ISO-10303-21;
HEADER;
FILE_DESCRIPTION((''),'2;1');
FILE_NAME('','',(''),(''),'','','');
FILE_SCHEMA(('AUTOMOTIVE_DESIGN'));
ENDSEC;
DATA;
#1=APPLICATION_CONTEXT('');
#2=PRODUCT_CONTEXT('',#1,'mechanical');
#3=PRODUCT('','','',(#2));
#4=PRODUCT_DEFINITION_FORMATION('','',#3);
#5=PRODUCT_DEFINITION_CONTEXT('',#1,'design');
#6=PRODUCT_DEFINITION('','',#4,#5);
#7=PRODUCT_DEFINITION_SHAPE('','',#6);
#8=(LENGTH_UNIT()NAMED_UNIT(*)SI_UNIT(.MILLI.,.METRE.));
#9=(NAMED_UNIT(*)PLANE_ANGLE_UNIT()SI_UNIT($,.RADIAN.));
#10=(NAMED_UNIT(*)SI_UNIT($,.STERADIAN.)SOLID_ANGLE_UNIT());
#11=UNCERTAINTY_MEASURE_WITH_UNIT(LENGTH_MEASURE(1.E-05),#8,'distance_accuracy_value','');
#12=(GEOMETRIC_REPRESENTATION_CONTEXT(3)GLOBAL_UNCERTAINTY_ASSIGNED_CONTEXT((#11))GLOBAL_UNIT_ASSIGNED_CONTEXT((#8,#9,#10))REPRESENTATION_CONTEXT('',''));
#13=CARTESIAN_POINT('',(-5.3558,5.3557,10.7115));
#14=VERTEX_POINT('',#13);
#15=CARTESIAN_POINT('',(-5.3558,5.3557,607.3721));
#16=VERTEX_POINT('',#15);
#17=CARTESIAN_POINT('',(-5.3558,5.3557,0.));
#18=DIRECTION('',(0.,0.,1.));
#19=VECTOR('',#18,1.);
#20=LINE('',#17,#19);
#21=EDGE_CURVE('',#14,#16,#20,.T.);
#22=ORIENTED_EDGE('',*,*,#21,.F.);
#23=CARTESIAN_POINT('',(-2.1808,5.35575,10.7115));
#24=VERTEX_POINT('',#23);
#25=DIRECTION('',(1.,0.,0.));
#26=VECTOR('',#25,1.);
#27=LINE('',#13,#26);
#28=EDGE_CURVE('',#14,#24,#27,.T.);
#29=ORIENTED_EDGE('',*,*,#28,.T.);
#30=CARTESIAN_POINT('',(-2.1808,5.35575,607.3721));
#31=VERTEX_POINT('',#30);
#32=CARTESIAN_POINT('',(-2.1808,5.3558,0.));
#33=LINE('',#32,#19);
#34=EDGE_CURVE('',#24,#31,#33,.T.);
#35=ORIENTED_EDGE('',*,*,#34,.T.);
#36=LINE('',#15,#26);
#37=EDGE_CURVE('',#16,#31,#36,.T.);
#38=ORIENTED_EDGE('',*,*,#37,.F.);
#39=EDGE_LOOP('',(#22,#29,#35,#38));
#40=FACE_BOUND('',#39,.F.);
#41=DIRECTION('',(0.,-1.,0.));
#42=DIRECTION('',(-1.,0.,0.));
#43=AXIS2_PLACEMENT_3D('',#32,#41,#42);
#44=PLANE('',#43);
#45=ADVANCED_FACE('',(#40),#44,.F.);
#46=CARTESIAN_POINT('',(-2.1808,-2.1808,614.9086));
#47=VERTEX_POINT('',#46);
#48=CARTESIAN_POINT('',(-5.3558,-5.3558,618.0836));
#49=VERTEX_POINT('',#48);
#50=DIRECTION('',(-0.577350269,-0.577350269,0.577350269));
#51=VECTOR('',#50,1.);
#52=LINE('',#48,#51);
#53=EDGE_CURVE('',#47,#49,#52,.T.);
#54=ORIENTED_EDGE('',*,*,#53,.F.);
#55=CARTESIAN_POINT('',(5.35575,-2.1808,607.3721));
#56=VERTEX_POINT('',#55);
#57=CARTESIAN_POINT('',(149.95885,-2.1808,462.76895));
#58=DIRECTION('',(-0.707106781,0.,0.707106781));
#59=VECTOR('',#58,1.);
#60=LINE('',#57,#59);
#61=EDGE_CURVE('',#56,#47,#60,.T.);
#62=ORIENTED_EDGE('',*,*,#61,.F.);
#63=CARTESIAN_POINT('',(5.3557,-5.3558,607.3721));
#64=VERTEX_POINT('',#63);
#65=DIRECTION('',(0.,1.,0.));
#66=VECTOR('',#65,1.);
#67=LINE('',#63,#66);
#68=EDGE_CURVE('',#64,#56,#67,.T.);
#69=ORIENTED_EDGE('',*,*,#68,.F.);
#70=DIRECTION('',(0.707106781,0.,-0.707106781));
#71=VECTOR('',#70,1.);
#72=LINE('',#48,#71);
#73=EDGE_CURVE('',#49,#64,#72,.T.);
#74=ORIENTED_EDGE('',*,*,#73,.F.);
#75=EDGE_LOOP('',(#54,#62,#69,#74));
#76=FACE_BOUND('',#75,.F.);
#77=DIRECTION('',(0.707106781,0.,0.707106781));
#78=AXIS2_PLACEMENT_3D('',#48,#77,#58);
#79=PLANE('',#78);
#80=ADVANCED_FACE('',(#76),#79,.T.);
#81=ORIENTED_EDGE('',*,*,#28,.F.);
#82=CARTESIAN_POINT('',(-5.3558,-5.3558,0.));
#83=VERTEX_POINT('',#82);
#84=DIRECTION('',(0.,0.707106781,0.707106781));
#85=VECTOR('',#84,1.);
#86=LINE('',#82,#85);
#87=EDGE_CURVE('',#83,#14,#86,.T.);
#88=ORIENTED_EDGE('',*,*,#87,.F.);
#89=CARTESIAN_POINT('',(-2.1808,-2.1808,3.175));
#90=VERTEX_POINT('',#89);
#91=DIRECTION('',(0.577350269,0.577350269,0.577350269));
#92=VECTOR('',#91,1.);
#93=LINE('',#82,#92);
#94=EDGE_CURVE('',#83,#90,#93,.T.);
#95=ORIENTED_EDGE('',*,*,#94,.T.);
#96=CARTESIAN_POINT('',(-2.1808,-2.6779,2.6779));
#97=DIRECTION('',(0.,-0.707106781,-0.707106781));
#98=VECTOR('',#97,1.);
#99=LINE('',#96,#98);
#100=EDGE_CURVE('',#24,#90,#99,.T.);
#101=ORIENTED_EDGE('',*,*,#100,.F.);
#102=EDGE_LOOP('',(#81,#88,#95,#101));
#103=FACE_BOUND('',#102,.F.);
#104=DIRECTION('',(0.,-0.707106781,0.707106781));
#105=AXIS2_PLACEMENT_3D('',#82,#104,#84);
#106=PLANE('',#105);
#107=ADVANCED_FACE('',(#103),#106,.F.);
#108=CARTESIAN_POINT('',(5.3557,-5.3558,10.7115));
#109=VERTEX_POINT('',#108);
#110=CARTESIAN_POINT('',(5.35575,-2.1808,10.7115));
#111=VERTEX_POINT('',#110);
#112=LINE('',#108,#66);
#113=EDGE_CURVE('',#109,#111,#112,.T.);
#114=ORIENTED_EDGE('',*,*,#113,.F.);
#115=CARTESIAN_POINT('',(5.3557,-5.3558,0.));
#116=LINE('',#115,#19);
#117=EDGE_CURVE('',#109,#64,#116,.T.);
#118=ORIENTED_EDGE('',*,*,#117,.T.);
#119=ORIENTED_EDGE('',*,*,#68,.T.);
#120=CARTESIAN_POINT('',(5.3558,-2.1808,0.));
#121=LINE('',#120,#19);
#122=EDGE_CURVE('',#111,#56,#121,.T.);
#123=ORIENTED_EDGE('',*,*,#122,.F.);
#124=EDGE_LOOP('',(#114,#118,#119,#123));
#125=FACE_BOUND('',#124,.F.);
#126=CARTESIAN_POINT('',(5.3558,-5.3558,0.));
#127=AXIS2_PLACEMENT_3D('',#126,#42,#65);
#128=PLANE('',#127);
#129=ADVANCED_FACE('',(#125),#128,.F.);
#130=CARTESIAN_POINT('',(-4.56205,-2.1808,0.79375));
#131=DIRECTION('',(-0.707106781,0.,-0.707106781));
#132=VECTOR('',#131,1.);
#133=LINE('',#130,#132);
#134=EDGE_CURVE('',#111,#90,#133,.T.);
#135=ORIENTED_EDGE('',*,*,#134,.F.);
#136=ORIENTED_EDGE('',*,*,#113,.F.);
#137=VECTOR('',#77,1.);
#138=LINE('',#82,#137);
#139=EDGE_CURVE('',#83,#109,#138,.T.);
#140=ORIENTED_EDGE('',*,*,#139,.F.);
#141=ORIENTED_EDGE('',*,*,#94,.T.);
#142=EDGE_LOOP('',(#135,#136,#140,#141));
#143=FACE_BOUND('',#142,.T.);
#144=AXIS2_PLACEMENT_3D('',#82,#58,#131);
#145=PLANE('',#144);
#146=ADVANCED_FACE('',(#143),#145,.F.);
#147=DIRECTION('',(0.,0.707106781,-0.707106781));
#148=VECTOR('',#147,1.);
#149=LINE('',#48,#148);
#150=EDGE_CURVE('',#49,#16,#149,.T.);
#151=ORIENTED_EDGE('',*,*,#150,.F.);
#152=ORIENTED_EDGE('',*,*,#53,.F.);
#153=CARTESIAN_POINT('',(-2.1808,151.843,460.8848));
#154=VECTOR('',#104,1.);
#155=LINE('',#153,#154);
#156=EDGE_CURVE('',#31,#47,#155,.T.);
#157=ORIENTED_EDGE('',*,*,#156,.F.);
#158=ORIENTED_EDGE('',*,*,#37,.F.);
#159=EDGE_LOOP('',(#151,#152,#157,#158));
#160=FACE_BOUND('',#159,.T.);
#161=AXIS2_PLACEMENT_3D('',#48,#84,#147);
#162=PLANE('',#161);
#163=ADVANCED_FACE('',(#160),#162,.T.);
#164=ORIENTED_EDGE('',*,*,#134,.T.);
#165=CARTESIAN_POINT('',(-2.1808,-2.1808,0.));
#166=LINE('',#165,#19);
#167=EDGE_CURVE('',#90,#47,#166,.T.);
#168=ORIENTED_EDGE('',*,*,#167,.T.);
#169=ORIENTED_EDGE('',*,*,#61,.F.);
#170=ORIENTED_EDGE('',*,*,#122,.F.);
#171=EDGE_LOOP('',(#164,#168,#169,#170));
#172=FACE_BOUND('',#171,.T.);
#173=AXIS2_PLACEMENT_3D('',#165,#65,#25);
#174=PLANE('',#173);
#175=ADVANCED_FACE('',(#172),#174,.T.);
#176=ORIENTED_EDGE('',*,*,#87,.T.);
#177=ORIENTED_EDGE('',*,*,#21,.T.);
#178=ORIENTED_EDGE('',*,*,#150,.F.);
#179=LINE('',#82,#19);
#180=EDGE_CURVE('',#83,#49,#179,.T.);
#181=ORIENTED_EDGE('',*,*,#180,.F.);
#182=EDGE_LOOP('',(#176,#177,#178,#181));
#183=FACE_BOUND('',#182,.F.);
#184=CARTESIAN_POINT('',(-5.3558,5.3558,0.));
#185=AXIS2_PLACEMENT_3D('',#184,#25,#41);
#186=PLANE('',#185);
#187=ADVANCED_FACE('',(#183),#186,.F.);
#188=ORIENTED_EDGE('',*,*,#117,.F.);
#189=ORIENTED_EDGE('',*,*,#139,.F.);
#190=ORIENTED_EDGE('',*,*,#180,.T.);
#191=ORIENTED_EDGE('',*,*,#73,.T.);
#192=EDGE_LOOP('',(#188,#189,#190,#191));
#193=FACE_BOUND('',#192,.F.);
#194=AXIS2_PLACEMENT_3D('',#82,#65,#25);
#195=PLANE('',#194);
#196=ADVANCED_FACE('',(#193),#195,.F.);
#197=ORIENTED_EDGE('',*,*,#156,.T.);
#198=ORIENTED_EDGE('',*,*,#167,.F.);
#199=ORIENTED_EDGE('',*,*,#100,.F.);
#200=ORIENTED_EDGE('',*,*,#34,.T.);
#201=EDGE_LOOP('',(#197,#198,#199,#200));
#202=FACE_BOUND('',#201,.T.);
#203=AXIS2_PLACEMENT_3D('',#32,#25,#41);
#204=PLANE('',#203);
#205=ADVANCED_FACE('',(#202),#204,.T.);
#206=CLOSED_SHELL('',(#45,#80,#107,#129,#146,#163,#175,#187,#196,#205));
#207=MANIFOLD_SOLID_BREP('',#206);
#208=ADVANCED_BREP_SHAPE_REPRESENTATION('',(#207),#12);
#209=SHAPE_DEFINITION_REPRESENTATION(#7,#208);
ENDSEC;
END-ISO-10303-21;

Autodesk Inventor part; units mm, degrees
ref_plane "YZ Plane" through (0, 0, 0) normal (1, 0, 0) x (0, 1, 0)
ref_plane "XZ Plane" through (0, 0, 0) normal (0, 1, 0) x (-1, 0, 0)
sketch "Sketch1" plane through (0, 0, 0) normal (0, 0, 1) x (1, 0, 0)
  line L0 (-5.3558, -5.3558) -> (5.3558, -5.3558)
  line L1 (5.3558, -5.3558) -> (5.3558, 5.3558)
  line L2 (5.3558, 5.3558) -> (-5.3558, 5.3558)
  line L3 (-5.3558, 5.3558) -> (-5.3558, -5.3558)
  line L4 (-5.3558, -5.3558) -> (5.3558, 5.3558) construction
  line L5 (5.3558, -5.3558) -> (-5.3558, 5.3558) construction
  line L6 (5.3558, 5.3558) -> (-2.1808, 5.3558)
  line L7 (-2.1808, 5.3558) -> (-2.1808, -2.1808)
  line L8 (-2.1808, -2.1808) -> (5.3558, -2.1808)
  line L9 (5.3558, -2.1808) -> (5.3558, 5.3558)
  point P0 (0, 0)
  dimension "d0" = 3.175
  dimension "d1" = 3.175
extrude "Extrusion1" add sketch "Sketch1" along normal blind 618.0836 contours L3 L2 L7 L8 L1 L0
sketch "Sketch2" plane through (-5.3558, -5.3558, 0) normal (-1, 0, 0) x (0, 0, 1)
  line L0 (0, 10.7115) -> (0, 0) projected
  line L1 (0, 0) -> (618.0836, 0) projected
  line L2 (0, 10.7115) -> (618.0836, 10.7115) projected
  line L3 (309.0418, 10.7115) -> (309.0418, 0)
  line L4 (618.0836, 0) -> (607.3721, 10.7115)
  line L5 (618.0836, 0) -> (633.232, 0) construction
  line L6 (607.3721, 10.7115) -> (618.0836, 10.7115)
  line L7 (618.0836, 0) -> (618.0836, 10.7115)
  line L8 (0, 10.7115) -> (0, 0)
  line L9 (0, 0) -> (10.7115, 10.7115)
  line L10 (0, 0) -> (-15.1484, 0) construction
  line L11 (10.7115, 10.7115) -> (0, 10.7115)
  line L12 (0, 0) -> (0, 10.7115)
  point P0 (0, 5.3558)
  dimension "d4" = 135
extrude "Extrusion2" cut sketch "Sketch2" against normal blind 25.4 contours L2 L9 L0 | L4 L2 L7
ref_plane "Work Plane1" through (-2.1808, -2.1808, 614.9086) normal (-0.7071068, 0.7071068, 0) x (0, 0, 1)
mirror "Mirror1" about plane through (-2.1808, -2.1808, 614.9086) normal (-0.7071068, 0.7071068, 0) of "Extrusion2"
properties part number "2222_Brass Angle Bracket_V1" material "Brass"
